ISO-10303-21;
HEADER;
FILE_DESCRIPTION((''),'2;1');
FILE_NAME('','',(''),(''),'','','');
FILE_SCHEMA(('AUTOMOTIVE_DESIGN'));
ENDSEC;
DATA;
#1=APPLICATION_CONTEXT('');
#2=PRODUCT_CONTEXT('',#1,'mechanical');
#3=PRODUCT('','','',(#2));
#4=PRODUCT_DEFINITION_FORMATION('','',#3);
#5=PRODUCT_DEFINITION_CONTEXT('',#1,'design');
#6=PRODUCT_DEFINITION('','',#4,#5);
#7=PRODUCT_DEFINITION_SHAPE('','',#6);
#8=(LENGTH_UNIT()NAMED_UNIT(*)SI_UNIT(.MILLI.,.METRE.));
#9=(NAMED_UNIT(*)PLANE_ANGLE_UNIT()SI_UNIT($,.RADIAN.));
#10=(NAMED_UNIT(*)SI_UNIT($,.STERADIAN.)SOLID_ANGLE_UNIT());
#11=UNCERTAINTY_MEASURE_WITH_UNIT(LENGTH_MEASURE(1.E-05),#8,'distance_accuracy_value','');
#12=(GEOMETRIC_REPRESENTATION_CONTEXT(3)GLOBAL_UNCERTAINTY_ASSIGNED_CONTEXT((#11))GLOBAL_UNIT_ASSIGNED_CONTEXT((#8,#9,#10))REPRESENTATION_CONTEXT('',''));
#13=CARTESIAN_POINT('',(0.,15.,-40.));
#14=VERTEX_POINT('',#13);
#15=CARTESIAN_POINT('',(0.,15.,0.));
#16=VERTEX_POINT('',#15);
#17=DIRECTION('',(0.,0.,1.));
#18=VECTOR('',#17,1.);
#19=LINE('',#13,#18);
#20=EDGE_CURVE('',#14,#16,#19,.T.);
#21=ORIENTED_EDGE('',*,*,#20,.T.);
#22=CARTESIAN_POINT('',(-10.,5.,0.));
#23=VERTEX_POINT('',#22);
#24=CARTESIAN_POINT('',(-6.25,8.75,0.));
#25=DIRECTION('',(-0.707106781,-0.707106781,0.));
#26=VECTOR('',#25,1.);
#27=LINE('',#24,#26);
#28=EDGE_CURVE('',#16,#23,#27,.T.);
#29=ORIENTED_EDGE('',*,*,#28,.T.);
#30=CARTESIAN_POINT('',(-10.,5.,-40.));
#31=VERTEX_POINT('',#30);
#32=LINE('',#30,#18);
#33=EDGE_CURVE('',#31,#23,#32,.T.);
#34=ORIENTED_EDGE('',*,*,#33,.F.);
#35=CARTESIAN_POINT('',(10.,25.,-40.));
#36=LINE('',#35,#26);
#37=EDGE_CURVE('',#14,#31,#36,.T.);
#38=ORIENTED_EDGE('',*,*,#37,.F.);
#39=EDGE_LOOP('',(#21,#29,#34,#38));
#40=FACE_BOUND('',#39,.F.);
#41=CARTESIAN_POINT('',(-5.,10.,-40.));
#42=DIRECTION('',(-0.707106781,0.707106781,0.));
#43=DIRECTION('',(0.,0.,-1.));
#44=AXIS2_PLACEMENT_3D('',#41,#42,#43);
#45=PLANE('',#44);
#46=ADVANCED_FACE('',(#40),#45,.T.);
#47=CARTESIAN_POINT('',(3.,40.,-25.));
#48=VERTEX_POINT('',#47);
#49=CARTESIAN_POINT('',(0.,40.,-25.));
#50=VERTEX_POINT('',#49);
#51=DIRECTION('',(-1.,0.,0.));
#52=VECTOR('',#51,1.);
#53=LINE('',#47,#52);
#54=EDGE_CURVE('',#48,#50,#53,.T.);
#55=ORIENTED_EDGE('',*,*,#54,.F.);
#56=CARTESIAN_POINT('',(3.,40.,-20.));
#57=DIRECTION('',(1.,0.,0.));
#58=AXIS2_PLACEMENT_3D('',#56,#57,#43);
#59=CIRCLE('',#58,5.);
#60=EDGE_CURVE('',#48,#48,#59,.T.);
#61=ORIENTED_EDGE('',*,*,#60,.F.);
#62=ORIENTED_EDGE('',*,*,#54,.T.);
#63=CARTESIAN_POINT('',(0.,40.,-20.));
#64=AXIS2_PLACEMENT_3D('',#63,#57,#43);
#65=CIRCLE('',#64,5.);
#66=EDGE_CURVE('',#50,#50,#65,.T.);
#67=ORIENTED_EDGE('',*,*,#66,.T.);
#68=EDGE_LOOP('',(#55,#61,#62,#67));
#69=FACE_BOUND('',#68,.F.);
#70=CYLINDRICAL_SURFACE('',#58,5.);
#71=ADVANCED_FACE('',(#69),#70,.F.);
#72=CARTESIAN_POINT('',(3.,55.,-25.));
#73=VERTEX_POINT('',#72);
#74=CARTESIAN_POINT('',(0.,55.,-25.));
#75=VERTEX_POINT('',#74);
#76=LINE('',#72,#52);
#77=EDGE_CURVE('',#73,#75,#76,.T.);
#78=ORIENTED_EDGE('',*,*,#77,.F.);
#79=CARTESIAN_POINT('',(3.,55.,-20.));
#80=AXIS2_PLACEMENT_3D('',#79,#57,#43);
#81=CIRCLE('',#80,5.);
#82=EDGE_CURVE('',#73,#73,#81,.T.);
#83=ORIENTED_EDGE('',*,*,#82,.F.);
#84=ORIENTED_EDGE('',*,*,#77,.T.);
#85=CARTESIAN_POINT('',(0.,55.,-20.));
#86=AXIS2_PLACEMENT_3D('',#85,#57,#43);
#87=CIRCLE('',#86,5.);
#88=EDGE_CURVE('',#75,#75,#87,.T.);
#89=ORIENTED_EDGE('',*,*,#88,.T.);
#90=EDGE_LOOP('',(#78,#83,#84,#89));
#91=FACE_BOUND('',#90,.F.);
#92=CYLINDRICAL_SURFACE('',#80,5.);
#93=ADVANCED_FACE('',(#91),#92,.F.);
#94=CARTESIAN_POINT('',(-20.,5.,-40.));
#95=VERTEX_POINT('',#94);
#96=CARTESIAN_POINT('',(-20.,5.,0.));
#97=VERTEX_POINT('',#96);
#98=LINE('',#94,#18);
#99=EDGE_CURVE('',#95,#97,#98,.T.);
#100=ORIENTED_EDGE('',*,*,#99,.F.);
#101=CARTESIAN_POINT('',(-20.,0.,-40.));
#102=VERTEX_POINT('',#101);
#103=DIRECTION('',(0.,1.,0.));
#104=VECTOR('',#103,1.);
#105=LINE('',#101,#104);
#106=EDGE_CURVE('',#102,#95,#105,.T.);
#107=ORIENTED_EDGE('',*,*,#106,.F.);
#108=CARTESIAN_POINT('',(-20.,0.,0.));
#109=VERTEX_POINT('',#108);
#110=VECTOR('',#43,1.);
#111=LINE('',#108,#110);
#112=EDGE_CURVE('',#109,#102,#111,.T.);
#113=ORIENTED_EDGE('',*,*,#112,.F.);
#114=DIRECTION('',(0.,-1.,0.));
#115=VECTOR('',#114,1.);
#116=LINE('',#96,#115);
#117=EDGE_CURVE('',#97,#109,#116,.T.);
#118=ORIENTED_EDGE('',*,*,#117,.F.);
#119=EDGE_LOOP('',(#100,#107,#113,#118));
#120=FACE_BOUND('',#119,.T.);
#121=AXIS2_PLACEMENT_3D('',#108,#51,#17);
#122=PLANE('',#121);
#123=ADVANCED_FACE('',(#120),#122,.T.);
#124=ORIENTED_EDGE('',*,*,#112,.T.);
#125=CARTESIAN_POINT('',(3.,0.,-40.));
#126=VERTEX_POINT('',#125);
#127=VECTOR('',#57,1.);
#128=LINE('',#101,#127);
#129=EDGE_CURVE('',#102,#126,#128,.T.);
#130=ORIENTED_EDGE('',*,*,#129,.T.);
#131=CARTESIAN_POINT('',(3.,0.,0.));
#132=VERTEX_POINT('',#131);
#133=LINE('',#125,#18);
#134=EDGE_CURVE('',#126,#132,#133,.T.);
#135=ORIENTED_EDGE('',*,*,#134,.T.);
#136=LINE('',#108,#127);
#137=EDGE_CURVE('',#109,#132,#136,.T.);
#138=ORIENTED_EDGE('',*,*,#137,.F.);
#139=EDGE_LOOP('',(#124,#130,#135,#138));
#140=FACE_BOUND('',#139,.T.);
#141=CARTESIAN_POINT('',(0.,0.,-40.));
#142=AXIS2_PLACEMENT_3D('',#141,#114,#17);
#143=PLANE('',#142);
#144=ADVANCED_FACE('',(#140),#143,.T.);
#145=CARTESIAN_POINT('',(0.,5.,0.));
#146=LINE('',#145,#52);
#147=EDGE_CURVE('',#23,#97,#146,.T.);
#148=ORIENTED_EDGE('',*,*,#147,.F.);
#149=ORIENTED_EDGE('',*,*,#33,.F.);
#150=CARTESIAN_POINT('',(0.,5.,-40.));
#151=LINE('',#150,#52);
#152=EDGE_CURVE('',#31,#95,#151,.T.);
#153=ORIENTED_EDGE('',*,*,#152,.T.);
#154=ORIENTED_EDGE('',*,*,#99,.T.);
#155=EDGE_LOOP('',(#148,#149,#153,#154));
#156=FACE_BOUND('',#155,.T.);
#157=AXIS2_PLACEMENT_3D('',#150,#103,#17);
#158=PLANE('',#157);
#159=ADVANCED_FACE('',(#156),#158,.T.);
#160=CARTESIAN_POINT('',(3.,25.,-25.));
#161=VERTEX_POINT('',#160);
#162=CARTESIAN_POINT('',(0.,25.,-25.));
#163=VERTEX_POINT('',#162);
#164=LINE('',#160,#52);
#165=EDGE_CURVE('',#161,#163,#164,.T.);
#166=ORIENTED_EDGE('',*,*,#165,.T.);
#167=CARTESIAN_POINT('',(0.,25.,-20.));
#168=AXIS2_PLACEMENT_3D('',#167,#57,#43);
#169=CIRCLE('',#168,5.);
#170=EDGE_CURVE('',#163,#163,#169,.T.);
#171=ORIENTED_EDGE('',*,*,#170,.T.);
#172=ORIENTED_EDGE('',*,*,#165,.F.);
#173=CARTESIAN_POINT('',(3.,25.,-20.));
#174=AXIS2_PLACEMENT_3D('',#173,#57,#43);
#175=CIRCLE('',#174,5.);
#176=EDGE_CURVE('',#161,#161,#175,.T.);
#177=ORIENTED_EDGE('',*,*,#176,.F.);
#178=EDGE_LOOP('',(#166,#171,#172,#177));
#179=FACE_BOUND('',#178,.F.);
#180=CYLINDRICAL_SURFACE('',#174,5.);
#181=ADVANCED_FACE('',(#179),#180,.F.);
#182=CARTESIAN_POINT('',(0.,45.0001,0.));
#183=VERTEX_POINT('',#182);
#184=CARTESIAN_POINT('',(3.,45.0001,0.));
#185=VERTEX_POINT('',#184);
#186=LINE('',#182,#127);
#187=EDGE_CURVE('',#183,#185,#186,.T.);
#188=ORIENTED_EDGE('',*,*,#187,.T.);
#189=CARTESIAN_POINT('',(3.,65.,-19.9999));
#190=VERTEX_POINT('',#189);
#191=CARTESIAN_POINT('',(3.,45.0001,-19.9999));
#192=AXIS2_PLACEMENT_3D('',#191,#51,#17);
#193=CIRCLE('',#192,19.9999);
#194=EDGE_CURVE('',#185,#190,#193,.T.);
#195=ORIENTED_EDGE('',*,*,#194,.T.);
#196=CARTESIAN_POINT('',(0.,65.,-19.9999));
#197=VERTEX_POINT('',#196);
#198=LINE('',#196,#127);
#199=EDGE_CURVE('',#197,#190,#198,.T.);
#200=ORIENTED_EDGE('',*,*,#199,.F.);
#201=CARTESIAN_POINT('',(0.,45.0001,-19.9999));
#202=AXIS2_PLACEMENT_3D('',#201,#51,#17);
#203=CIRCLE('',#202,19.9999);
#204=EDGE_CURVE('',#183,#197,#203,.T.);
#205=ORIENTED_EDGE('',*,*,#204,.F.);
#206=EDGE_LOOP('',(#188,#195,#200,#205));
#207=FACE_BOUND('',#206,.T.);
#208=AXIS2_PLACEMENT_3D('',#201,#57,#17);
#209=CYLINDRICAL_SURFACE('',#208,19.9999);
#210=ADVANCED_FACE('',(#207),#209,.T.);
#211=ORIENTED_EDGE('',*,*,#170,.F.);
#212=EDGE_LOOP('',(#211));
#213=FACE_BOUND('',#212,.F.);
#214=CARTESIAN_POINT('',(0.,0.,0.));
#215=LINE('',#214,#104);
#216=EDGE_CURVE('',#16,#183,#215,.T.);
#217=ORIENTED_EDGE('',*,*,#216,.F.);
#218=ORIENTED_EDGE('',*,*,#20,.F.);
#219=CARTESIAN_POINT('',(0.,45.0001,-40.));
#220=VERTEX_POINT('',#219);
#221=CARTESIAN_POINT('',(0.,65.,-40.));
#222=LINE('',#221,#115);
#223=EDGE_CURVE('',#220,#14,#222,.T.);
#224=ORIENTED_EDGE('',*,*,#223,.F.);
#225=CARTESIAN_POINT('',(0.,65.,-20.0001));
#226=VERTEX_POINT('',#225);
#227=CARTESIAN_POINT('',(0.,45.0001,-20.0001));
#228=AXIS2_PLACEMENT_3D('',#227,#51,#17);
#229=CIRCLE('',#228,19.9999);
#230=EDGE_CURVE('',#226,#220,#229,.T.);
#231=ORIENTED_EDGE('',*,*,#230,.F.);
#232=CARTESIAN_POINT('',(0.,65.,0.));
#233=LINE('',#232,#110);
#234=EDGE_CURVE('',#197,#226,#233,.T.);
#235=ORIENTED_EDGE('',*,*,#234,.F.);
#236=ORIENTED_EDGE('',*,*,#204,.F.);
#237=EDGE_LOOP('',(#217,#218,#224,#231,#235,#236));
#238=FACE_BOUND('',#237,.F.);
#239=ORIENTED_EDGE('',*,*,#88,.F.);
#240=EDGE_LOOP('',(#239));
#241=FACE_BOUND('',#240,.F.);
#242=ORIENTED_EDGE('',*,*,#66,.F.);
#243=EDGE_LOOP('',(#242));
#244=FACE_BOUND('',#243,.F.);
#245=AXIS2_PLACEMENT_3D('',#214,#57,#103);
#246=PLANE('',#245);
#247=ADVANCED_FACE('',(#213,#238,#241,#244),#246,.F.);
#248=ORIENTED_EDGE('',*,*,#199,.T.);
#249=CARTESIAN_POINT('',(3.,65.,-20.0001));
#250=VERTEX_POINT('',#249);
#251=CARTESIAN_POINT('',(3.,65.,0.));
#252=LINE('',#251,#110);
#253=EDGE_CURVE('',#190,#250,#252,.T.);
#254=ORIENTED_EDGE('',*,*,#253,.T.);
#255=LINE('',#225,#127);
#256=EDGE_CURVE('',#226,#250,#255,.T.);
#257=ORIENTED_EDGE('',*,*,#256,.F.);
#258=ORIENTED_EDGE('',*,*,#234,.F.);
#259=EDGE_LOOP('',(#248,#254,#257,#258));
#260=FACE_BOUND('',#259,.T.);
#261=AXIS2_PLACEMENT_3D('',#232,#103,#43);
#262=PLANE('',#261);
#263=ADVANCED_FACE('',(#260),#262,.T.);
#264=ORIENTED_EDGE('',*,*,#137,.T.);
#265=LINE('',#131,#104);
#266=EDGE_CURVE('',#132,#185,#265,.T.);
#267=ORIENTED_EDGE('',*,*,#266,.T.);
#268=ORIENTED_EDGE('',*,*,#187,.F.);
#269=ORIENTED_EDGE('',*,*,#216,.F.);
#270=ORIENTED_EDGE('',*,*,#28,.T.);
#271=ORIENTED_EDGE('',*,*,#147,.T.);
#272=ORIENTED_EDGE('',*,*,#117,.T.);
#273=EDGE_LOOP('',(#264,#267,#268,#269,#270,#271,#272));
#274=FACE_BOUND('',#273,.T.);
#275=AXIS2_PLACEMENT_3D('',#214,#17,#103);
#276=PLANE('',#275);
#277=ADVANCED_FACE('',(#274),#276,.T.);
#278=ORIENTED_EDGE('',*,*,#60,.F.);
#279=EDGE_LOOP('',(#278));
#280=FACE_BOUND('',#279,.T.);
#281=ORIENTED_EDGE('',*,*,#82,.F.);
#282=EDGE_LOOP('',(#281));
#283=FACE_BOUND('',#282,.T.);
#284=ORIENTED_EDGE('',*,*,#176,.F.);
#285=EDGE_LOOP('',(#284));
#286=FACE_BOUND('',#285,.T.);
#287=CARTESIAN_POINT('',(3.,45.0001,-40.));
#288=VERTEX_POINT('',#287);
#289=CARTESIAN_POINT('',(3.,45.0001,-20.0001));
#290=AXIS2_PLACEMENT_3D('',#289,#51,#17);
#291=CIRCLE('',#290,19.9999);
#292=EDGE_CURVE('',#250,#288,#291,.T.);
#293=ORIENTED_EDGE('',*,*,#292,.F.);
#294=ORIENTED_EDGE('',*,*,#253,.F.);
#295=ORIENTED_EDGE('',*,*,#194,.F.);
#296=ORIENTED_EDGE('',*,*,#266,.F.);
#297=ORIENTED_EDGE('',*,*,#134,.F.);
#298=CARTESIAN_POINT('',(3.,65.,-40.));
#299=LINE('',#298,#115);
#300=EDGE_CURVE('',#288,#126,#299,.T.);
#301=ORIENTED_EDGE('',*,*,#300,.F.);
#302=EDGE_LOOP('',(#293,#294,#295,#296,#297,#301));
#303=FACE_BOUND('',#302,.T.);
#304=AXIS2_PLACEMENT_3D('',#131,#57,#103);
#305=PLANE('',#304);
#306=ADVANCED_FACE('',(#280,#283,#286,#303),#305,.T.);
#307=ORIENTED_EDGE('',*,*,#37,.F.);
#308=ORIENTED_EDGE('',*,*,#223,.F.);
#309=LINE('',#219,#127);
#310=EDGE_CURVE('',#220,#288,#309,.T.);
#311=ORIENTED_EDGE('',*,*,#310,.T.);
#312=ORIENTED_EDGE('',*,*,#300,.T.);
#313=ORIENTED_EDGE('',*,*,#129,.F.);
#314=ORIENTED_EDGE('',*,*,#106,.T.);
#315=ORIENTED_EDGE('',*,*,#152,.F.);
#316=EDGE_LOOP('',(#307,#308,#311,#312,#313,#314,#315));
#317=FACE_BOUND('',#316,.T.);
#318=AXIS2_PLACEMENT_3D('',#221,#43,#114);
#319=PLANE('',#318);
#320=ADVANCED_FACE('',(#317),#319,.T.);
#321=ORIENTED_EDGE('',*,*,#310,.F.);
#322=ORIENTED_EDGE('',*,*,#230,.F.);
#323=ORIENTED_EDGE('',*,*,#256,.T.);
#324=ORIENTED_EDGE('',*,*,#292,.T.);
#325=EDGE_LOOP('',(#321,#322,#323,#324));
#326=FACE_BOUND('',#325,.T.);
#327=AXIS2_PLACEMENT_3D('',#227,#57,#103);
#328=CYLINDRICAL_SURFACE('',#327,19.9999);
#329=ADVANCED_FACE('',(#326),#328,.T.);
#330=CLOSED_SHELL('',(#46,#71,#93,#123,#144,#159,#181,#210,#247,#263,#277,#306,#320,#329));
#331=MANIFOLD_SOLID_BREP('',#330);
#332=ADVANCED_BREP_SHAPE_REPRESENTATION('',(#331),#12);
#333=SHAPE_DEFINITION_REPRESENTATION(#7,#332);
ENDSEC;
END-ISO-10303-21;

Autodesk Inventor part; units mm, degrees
ref_plane "YZ Plane" through (0, 0, 0) normal (1, 0, 0) x (0, 1, 0)
ref_plane "XZ Plane" through (0, 0, 0) normal (0, 1, 0) x (-1, 0, 0)
ref_plane "XY Plane" through (0, 0, 0) normal (0, 0, 1) x (1, 0, 0)
sketch "Sketch1" plane through (0, 0, 0) normal (1, 0, 0) x (0, 1, 0)
  line L0 (0, 0) -> (65, 0)
  line L1 (65, 0) -> (65, -40)
  line L2 (65, -40) -> (0, -40)
  line L3 (0, -40) -> (0, 0)
  dimension "d0" = 40
  dimension "d1" = 65
extrude "Extrusion1" add sketch "Sketch1" along normal blind 3
sketch "Sketch2" plane through (0, 0, 0) normal (-1, 0, 0) x (0, 0, 1)
  line L0 (0, 0) -> (-40, 0) projected
  line L1 (-40, 0) -> (-40, 65) projected
  line L2 (0, 0) -> (-40, 0)
  line L3 (-40, 0) -> (-40, 5)
  line L4 (-40, 5) -> (0, 5)
  line L5 (0, 5) -> (0, 0)
  dimension "d4" = 5
extrude "Extrusion2" add sketch "Sketch2" along normal blind 20
chamfer "Chamfer1" distance 10 angle 45 1 edges at (0, 5, -20)
sketch "Sketch3" plane through (3, 0, 0) normal (1, 0, 0) x (0, 0, -1)
  circle A0 centre (20, 55) radius 5
  circle A1 centre (20, 40) radius 5
  circle A2 centre (20, 25) radius 5
  line L0 (40, 65) -> (0, 65) projected
  point P0 (0, 0)
  dimension "d10" = 10
  dimension "d11" = 10
  dimension "d12" = 5
  dimension "d13" = 15
  dimension "d14" = 20
extrude "Extrusion3" cut sketch "Sketch3" against normal up to surface (3 mm away)
fillet "Fillet1" radius 20 2 edges at (1.5, 65, 0) (1.5, 65, -40)
properties part number "pot_stand"
